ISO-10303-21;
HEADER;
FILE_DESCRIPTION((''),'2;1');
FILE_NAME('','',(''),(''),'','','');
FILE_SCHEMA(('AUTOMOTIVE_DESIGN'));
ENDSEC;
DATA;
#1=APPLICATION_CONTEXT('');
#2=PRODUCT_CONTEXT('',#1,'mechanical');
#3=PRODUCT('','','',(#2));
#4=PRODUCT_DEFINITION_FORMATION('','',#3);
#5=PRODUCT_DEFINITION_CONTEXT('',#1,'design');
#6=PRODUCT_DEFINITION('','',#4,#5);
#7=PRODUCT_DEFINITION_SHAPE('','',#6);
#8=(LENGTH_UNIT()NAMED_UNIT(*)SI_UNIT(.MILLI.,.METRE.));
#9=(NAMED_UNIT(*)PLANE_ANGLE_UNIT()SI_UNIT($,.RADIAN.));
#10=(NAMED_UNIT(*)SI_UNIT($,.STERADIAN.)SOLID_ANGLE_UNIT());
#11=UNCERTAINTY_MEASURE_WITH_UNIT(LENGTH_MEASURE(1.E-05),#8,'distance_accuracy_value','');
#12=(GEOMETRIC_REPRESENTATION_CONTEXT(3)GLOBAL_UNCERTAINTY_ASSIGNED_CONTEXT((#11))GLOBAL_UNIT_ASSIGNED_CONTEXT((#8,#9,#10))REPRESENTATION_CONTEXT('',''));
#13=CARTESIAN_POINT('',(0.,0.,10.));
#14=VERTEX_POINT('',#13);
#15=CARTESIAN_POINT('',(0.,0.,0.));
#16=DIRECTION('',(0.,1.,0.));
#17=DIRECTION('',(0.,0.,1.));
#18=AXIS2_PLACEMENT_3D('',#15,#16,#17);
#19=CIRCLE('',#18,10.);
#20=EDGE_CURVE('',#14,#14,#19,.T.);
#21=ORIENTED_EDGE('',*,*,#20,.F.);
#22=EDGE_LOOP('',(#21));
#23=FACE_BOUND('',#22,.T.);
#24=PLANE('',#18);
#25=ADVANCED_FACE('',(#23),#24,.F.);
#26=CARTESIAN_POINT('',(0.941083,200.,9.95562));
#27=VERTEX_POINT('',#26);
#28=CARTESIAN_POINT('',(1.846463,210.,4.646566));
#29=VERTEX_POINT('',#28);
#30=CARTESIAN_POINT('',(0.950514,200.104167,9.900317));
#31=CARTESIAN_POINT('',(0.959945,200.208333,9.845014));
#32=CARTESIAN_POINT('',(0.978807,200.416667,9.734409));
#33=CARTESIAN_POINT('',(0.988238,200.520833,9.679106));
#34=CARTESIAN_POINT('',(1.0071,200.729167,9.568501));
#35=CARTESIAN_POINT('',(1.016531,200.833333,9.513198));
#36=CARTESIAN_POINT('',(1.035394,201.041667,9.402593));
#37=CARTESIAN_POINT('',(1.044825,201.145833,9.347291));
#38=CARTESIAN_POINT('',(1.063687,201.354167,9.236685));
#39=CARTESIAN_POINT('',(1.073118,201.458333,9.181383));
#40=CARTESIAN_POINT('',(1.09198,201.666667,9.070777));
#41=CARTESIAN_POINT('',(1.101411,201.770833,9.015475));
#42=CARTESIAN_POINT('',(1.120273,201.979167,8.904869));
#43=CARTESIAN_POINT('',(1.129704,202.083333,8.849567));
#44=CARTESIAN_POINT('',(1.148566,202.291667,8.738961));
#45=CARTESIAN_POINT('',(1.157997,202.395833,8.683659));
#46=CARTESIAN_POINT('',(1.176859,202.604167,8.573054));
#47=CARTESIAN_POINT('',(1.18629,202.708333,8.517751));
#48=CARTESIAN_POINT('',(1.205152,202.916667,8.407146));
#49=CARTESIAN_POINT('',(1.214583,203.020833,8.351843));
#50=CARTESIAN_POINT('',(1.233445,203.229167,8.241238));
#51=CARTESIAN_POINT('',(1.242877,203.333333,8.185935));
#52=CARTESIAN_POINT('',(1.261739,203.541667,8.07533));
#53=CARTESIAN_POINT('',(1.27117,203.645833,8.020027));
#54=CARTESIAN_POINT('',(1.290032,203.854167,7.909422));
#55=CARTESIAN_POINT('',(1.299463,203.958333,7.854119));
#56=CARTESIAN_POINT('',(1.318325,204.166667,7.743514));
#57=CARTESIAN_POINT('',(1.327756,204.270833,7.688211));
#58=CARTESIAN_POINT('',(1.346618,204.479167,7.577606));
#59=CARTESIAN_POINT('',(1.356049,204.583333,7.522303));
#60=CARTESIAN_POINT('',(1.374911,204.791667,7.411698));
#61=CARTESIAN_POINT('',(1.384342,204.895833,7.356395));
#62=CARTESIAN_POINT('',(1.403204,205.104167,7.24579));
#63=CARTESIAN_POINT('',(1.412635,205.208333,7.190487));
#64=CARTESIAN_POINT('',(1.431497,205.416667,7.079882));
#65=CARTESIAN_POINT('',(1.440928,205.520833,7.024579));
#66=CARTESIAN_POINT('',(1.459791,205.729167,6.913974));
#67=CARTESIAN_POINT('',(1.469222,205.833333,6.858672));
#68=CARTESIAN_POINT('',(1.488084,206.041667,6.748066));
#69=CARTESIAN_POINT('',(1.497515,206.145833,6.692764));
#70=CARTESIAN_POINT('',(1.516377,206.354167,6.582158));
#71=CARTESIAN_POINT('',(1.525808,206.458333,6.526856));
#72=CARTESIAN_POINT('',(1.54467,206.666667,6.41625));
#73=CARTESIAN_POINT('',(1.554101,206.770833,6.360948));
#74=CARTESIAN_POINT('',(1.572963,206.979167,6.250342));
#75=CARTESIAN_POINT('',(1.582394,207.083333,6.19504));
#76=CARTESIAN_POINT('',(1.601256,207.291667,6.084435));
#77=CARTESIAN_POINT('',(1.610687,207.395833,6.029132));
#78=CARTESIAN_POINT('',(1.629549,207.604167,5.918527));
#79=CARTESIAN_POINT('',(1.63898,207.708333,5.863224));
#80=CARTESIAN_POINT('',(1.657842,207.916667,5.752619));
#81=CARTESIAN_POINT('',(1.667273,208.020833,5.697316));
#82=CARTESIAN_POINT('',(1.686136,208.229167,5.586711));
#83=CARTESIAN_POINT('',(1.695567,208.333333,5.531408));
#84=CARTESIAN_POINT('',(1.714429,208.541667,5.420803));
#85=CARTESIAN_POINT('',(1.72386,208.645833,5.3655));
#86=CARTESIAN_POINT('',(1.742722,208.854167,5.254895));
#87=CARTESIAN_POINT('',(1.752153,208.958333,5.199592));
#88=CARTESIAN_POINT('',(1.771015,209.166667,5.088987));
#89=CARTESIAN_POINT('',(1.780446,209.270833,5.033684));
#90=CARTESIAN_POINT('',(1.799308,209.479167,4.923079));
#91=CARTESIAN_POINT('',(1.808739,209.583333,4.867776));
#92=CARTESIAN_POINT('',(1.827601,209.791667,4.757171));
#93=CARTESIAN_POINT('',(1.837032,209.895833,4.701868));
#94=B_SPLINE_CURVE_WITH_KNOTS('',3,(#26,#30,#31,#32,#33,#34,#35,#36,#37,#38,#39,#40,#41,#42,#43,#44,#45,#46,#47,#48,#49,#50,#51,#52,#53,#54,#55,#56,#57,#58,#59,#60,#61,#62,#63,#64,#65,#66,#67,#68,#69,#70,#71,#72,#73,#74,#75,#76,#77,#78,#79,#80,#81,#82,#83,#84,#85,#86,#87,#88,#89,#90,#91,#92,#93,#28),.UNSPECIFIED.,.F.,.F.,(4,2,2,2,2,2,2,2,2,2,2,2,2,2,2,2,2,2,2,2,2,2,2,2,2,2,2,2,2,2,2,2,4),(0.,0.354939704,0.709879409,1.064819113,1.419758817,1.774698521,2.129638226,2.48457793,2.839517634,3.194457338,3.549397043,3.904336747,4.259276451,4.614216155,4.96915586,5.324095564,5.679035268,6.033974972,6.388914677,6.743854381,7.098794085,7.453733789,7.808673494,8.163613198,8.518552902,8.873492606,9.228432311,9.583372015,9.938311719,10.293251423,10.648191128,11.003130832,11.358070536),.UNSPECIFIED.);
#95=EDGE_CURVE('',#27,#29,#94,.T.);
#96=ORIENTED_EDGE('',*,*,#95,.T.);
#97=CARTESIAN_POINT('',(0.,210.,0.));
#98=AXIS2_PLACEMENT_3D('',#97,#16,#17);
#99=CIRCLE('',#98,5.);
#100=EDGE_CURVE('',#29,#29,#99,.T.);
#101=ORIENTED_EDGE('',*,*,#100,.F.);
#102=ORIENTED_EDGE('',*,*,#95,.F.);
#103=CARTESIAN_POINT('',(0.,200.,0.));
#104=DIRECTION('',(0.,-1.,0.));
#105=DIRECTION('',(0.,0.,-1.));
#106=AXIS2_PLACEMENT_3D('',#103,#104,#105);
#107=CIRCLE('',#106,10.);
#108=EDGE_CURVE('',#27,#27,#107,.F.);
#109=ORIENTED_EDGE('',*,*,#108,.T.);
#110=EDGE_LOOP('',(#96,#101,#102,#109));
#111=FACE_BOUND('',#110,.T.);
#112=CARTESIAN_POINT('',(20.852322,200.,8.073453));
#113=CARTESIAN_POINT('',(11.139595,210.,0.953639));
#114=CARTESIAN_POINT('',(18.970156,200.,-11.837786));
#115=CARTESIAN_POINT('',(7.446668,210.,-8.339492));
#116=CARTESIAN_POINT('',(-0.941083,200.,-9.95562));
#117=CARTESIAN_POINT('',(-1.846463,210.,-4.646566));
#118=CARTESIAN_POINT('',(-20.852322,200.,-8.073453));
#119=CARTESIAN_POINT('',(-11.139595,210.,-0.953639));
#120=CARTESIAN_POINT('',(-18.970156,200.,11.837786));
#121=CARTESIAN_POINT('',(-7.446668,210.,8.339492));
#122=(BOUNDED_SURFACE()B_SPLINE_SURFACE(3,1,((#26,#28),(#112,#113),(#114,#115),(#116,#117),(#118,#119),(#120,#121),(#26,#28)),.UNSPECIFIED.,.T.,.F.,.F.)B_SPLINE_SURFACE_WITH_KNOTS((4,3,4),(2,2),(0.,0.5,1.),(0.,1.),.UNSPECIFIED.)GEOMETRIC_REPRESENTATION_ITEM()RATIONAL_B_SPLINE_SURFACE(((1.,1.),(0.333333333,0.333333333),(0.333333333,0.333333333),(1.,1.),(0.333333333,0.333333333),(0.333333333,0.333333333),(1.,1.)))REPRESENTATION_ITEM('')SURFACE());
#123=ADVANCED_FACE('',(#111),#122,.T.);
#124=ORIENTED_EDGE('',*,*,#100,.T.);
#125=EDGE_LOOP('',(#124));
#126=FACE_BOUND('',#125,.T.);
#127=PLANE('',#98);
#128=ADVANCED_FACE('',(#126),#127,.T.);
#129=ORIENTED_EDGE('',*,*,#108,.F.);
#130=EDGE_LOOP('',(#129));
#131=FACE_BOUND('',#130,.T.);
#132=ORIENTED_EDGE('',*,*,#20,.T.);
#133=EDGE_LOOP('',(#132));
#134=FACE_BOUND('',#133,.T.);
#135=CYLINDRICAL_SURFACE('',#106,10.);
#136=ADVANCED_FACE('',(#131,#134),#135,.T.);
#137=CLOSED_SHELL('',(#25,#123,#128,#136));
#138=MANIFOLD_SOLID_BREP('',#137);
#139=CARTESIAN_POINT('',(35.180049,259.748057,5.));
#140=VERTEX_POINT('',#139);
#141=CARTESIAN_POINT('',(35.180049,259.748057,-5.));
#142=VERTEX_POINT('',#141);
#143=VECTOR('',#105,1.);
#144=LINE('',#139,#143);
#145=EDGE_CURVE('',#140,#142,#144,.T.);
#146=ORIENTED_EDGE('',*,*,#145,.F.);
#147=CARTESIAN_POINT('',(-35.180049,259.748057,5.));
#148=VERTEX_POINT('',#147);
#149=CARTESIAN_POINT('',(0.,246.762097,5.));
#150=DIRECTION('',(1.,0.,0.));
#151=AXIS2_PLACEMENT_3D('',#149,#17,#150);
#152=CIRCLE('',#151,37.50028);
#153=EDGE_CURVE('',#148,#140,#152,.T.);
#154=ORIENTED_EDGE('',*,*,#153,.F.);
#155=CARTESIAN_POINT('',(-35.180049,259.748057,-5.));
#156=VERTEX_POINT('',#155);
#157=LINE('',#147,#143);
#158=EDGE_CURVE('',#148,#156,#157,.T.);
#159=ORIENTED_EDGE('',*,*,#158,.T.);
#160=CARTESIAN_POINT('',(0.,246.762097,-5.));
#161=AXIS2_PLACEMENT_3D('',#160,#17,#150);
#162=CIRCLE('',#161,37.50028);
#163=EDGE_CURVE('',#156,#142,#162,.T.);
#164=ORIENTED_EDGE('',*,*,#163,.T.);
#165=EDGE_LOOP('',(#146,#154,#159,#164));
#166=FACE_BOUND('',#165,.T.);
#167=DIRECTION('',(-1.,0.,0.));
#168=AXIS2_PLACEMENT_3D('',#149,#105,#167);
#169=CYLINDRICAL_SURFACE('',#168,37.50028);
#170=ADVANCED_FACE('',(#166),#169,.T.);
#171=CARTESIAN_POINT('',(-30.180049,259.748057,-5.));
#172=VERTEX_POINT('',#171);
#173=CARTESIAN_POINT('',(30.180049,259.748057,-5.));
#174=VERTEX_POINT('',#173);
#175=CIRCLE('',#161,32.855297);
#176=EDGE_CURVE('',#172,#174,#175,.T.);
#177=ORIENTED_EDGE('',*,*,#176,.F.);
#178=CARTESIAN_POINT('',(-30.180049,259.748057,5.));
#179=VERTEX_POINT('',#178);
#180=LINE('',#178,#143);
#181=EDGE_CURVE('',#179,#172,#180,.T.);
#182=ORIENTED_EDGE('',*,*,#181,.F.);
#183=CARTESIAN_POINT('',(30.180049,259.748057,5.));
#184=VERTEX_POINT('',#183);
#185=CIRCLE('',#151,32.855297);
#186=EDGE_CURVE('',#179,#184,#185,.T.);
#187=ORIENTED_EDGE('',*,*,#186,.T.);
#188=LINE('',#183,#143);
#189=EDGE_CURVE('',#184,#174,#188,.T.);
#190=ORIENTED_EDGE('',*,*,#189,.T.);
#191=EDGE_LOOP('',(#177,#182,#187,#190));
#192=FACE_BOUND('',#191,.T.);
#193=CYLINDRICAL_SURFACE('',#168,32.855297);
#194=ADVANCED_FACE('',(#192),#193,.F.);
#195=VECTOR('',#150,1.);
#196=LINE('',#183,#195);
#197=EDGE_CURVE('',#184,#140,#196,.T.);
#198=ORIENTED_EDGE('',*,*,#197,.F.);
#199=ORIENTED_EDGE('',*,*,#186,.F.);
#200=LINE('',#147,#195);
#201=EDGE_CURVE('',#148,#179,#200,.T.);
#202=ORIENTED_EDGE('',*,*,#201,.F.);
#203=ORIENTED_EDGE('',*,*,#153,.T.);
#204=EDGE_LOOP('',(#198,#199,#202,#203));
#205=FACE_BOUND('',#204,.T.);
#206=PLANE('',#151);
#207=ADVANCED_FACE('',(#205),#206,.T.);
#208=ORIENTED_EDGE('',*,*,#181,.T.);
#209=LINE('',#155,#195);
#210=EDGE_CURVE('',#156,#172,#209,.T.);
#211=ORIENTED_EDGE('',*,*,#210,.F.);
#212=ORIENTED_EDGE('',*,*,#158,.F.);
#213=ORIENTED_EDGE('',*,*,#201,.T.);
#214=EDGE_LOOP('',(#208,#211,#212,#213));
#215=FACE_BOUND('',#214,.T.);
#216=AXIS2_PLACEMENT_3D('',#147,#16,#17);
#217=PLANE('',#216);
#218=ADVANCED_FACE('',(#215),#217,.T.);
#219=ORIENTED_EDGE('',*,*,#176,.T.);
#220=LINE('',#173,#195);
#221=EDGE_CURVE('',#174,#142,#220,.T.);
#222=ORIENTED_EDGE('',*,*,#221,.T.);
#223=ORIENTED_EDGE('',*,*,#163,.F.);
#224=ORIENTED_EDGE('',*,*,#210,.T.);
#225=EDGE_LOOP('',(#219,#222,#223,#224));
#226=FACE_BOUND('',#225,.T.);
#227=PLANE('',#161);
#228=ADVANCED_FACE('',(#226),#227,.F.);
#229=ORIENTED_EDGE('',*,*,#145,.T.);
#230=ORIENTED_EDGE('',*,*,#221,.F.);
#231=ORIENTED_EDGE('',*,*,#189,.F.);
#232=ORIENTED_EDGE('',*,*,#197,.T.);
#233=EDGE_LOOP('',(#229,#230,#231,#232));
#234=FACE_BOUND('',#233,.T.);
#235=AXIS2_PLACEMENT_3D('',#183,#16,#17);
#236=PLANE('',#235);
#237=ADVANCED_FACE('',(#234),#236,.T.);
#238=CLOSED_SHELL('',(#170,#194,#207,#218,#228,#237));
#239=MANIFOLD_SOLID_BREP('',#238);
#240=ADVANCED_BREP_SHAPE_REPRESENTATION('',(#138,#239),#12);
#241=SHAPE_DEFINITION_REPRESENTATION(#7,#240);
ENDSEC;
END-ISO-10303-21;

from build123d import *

# Parameters (mm, degrees)
SKETCH_1_R           = 10
EXTRUDE_1_DEPTH      = 200
EXTRUDE_2_DEPTH      = 5
EXTRUDE_2_DEPTH_BACK = 5


with BuildPart() as part:
    # Эскиз1 → Бобышка-Вытянуть1 (new body)
    with BuildSketch(Plane(origin=(0, 0, 0), x_dir=(1, 0, 0), z_dir=(0, 1, 0))):
        with Locations(Location((0, 0, 0), (0, 0, 270))):
            Circle(SKETCH_1_R)
    extrude(amount=EXTRUDE_1_DEPTH)

    # По сечениям1: read off the stored shape, not the designer's step
    # По сечениям1: loft between two sections, ruled curve by curve
    loft_1_from = [
        Edge.make_bspline([(0.941083133, 200, 9.955619646), (20.852322425, 200, 8.07345338), (18.970156159, 200, -11.837785912), (-0.941083133, 200, -9.955619646), (-20.852322425, 200, -8.07345338), (-18.970156159, 200, 11.837785912), (0.941083133, 200, 9.955619646)], [0, 0, 0, 0, 0.5, 0.5, 0.5, 1, 1, 1, 1], 3, [1, 0.333333333, 0.333333333, 1, 0.333333333, 0.333333333, 1]),
    ]
    loft_1_to = [
        Edge.make_bspline([(1.846463267, 210, 4.646565765), (11.139594796, 210, 0.953639232), (7.446668263, 210, -8.339492298), (-1.846463267, 210, -4.646565765), (-11.139594796, 210, -0.953639232), (-7.446668263, 210, 8.339492298), (1.846463267, 210, 4.646565765)], [0, 0, 0, 0, 0.5, 0.5, 0.5, 1, 1, 1, 1], 3, [1, 0.333333333, 0.333333333, 1, 0.333333333, 0.333333333, 1]),
    ]
    loft_1 = Solid(Shell([*[Face.make_surface_from_curves(loft_1_from[k], loft_1_to[k]) for k in range(1)], Face(Wire(loft_1_from)), Face(Wire(loft_1_to))]))
    add(loft_1)


with BuildPart() as body_2:
    # Эскиз8 → Бобышка-Вытянуть2 (new, two sides: drawn at the far end of the back side and taken through both)
    with BuildSketch(Plane.XY.offset(-EXTRUDE_2_DEPTH_BACK)):
        with BuildLine():
            Line((-35.180049217, 259.748056851), (-30.180049217, 259.748056851))
            ThreePointArc((-30.180049217, 259.748056851), (0, 213.906800526), (30.180049217, 259.748056851))
            Line((30.180049217, 259.748056851), (35.180049217, 259.748056851))
            ThreePointArc((35.180049217, 259.748056851), (0, 209.261817044), (-35.180049217, 259.748056851))
        make_face()
    extrude(amount=EXTRUDE_2_DEPTH + EXTRUDE_2_DEPTH_BACK)


solid = Compound([part.part, body_2.part])
